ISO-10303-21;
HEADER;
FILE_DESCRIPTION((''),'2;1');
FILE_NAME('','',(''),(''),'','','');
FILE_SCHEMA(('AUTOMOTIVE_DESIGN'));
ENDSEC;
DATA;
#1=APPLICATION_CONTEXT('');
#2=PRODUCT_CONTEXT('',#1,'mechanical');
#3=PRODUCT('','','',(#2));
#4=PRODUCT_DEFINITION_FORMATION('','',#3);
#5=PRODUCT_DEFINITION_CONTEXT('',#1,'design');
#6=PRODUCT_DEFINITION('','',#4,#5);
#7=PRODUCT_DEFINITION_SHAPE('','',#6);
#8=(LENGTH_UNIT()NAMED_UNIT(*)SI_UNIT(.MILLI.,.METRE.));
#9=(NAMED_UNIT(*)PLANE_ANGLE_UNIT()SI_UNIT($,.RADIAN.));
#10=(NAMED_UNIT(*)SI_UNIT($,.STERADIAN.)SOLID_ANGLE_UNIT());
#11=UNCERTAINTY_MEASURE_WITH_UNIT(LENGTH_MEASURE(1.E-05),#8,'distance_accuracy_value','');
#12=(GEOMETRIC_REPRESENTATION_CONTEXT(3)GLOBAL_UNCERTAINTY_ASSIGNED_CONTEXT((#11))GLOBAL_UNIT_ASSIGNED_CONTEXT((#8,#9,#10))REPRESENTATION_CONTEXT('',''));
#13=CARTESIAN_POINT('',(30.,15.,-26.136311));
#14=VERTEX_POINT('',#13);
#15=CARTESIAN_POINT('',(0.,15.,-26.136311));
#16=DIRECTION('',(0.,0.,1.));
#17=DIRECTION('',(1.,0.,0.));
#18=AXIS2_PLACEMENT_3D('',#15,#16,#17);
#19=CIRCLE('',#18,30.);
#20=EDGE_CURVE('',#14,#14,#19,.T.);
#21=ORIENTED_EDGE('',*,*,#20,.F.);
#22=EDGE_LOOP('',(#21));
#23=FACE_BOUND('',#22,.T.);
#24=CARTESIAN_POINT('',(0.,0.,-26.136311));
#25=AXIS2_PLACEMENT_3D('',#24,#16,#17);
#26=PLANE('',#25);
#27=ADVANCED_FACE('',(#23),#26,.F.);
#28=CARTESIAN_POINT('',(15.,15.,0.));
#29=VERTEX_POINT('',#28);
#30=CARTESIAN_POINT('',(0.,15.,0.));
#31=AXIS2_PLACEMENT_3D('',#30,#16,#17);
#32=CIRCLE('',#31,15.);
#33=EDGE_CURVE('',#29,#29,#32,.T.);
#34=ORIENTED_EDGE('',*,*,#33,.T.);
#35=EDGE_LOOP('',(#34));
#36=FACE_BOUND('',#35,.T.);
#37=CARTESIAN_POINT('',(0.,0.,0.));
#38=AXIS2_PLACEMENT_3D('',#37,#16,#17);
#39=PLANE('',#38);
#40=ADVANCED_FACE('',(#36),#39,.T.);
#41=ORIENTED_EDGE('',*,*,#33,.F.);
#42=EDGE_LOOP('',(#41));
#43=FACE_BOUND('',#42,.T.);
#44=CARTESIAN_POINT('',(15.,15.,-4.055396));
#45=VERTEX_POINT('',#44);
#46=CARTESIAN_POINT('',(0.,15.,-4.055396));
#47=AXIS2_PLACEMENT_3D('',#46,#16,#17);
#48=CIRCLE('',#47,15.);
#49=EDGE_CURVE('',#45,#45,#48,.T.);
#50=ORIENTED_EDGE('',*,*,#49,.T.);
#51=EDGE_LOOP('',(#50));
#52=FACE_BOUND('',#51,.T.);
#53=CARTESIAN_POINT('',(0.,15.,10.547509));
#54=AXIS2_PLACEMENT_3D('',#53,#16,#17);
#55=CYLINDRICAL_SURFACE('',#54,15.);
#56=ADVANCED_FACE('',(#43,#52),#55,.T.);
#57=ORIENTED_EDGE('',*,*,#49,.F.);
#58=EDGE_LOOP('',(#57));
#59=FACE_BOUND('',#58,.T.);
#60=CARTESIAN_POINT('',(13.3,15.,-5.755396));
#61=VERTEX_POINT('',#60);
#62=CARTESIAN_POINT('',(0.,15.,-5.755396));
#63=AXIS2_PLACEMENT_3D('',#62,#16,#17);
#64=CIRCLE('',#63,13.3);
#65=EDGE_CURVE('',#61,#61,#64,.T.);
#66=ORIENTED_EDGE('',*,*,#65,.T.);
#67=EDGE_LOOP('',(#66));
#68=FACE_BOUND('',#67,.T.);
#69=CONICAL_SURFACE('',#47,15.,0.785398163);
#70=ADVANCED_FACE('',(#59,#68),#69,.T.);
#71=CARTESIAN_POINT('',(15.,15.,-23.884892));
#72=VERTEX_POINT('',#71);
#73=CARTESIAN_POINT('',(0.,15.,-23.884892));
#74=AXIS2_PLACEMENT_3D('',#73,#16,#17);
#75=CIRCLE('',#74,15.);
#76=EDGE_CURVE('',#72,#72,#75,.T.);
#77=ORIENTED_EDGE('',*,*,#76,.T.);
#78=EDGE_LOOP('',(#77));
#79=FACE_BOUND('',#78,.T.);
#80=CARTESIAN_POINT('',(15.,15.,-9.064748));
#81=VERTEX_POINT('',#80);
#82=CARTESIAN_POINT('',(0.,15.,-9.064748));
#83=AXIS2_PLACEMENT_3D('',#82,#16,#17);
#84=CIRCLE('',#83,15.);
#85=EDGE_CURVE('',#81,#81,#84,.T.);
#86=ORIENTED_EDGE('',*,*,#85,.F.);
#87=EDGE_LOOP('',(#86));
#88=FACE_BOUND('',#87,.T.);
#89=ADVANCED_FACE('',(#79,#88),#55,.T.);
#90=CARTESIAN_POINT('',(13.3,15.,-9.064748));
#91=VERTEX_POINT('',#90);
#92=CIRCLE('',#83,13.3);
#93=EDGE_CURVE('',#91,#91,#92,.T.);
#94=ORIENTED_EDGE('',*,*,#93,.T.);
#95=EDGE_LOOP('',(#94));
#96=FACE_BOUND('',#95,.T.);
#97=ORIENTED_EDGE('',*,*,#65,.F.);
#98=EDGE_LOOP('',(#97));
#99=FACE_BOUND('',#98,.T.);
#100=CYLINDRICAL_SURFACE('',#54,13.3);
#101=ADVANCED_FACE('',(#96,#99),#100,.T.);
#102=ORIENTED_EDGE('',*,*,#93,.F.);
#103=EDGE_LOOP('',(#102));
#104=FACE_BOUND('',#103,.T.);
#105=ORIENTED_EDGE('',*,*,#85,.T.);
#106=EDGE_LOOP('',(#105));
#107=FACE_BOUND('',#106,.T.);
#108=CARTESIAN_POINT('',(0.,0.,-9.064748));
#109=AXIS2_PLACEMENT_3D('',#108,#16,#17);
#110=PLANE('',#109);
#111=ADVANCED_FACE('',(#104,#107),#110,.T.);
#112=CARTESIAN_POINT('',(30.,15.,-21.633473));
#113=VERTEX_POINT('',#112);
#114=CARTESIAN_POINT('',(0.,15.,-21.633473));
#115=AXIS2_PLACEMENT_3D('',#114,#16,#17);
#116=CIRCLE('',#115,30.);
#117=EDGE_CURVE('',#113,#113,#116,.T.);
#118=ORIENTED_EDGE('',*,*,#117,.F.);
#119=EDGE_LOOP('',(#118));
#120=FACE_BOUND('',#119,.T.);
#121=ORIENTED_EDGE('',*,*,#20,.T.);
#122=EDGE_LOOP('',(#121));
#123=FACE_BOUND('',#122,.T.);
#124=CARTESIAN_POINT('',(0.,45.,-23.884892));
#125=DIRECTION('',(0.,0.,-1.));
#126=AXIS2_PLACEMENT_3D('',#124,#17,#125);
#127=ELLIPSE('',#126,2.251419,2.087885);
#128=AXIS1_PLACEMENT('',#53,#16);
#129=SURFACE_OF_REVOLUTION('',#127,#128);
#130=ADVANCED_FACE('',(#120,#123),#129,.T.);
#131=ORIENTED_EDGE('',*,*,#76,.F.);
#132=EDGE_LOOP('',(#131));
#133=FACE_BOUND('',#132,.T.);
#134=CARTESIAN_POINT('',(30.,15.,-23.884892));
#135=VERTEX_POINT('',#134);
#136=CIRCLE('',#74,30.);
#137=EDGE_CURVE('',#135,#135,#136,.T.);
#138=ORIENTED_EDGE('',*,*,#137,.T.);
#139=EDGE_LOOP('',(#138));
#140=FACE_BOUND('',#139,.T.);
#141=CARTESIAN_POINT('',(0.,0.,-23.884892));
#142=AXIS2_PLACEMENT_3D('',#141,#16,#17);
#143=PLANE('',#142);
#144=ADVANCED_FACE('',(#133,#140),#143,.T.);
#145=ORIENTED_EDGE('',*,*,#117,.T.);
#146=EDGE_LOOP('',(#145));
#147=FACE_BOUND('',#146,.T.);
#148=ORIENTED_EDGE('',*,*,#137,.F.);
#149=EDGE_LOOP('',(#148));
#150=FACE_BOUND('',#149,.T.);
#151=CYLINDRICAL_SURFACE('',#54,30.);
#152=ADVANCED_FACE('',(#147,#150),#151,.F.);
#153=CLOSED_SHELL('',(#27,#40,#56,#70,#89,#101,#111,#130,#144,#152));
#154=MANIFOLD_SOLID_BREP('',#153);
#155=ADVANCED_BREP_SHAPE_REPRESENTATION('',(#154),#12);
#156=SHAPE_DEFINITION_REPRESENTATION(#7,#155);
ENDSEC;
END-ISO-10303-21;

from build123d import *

# Parameters (mm, degrees)
SKETCH1_W     = 3.309352518
SKETCH1_H     = 13.3
CHAMFER1_SIZE = 1.7


with BuildPart() as part:
    # Sketch1 → Revolve1 (revolve)
    with BuildSketch(Plane(origin=(0, 0, 0), x_dir=(0, 0, -1), z_dir=(1, 0, 0)), mode=Mode.PRIVATE) as revolve1_sk:
        Polygon((23.884892086, 15), (23.884892086, 30), (9.064748201, 30), (9.064748201, 28.3), (9.064748201, 15), align=None)
        with BuildLine():
            add(Edge.make_bspline(
                [(26.136310791, 45), (26.136310791, 47.087884729), (23.884892086, 47.087884729), (21.633473381, 47.087884729), (21.633473381, 45)],
                knots=[0, 0, 0, 1.570796327, 1.570796327, 3.141592654, 3.141592654, 3.141592654], degree=2, weights=[1, 0.707106781, 1, 0.707106781, 1]))
            Line((21.633473381, 45), (23.884892086, 45))
            Line((23.884892086, 45), (23.884892086, 30))
            Line((23.884892086, 30), (23.884892086, 15))
            Line((23.884892086, 15), (26.136310791, 15))
            Line((26.136310791, 15), (26.136310791, 45))
        make_face()
        Polygon((5.755395683, 15), (5.755395683, 28.3), (5.755395683, 30), (0, 30), (0, 15), align=None)
        with Locations((7.410071942, 21.65)):
            Rectangle(SKETCH1_W, SKETCH1_H)
    revolve(revolve1_sk.sketch.rotate(Axis((0, 15, 10.547508617), (0, 0, -1)), 90), axis=Axis((0, 15, 10.547508617), (0, 0, -1)))

    # Chamfer1
    chamfer1_edges = [part.edges().sort_by_distance(p)[0] for p in [
        (-15, 15, -5.755395683),
    ]]
    chamfer(chamfer1_edges, length=CHAMFER1_SIZE - 0.0001)  # a hair under: the kernel refuses the full size


solid = part.part
